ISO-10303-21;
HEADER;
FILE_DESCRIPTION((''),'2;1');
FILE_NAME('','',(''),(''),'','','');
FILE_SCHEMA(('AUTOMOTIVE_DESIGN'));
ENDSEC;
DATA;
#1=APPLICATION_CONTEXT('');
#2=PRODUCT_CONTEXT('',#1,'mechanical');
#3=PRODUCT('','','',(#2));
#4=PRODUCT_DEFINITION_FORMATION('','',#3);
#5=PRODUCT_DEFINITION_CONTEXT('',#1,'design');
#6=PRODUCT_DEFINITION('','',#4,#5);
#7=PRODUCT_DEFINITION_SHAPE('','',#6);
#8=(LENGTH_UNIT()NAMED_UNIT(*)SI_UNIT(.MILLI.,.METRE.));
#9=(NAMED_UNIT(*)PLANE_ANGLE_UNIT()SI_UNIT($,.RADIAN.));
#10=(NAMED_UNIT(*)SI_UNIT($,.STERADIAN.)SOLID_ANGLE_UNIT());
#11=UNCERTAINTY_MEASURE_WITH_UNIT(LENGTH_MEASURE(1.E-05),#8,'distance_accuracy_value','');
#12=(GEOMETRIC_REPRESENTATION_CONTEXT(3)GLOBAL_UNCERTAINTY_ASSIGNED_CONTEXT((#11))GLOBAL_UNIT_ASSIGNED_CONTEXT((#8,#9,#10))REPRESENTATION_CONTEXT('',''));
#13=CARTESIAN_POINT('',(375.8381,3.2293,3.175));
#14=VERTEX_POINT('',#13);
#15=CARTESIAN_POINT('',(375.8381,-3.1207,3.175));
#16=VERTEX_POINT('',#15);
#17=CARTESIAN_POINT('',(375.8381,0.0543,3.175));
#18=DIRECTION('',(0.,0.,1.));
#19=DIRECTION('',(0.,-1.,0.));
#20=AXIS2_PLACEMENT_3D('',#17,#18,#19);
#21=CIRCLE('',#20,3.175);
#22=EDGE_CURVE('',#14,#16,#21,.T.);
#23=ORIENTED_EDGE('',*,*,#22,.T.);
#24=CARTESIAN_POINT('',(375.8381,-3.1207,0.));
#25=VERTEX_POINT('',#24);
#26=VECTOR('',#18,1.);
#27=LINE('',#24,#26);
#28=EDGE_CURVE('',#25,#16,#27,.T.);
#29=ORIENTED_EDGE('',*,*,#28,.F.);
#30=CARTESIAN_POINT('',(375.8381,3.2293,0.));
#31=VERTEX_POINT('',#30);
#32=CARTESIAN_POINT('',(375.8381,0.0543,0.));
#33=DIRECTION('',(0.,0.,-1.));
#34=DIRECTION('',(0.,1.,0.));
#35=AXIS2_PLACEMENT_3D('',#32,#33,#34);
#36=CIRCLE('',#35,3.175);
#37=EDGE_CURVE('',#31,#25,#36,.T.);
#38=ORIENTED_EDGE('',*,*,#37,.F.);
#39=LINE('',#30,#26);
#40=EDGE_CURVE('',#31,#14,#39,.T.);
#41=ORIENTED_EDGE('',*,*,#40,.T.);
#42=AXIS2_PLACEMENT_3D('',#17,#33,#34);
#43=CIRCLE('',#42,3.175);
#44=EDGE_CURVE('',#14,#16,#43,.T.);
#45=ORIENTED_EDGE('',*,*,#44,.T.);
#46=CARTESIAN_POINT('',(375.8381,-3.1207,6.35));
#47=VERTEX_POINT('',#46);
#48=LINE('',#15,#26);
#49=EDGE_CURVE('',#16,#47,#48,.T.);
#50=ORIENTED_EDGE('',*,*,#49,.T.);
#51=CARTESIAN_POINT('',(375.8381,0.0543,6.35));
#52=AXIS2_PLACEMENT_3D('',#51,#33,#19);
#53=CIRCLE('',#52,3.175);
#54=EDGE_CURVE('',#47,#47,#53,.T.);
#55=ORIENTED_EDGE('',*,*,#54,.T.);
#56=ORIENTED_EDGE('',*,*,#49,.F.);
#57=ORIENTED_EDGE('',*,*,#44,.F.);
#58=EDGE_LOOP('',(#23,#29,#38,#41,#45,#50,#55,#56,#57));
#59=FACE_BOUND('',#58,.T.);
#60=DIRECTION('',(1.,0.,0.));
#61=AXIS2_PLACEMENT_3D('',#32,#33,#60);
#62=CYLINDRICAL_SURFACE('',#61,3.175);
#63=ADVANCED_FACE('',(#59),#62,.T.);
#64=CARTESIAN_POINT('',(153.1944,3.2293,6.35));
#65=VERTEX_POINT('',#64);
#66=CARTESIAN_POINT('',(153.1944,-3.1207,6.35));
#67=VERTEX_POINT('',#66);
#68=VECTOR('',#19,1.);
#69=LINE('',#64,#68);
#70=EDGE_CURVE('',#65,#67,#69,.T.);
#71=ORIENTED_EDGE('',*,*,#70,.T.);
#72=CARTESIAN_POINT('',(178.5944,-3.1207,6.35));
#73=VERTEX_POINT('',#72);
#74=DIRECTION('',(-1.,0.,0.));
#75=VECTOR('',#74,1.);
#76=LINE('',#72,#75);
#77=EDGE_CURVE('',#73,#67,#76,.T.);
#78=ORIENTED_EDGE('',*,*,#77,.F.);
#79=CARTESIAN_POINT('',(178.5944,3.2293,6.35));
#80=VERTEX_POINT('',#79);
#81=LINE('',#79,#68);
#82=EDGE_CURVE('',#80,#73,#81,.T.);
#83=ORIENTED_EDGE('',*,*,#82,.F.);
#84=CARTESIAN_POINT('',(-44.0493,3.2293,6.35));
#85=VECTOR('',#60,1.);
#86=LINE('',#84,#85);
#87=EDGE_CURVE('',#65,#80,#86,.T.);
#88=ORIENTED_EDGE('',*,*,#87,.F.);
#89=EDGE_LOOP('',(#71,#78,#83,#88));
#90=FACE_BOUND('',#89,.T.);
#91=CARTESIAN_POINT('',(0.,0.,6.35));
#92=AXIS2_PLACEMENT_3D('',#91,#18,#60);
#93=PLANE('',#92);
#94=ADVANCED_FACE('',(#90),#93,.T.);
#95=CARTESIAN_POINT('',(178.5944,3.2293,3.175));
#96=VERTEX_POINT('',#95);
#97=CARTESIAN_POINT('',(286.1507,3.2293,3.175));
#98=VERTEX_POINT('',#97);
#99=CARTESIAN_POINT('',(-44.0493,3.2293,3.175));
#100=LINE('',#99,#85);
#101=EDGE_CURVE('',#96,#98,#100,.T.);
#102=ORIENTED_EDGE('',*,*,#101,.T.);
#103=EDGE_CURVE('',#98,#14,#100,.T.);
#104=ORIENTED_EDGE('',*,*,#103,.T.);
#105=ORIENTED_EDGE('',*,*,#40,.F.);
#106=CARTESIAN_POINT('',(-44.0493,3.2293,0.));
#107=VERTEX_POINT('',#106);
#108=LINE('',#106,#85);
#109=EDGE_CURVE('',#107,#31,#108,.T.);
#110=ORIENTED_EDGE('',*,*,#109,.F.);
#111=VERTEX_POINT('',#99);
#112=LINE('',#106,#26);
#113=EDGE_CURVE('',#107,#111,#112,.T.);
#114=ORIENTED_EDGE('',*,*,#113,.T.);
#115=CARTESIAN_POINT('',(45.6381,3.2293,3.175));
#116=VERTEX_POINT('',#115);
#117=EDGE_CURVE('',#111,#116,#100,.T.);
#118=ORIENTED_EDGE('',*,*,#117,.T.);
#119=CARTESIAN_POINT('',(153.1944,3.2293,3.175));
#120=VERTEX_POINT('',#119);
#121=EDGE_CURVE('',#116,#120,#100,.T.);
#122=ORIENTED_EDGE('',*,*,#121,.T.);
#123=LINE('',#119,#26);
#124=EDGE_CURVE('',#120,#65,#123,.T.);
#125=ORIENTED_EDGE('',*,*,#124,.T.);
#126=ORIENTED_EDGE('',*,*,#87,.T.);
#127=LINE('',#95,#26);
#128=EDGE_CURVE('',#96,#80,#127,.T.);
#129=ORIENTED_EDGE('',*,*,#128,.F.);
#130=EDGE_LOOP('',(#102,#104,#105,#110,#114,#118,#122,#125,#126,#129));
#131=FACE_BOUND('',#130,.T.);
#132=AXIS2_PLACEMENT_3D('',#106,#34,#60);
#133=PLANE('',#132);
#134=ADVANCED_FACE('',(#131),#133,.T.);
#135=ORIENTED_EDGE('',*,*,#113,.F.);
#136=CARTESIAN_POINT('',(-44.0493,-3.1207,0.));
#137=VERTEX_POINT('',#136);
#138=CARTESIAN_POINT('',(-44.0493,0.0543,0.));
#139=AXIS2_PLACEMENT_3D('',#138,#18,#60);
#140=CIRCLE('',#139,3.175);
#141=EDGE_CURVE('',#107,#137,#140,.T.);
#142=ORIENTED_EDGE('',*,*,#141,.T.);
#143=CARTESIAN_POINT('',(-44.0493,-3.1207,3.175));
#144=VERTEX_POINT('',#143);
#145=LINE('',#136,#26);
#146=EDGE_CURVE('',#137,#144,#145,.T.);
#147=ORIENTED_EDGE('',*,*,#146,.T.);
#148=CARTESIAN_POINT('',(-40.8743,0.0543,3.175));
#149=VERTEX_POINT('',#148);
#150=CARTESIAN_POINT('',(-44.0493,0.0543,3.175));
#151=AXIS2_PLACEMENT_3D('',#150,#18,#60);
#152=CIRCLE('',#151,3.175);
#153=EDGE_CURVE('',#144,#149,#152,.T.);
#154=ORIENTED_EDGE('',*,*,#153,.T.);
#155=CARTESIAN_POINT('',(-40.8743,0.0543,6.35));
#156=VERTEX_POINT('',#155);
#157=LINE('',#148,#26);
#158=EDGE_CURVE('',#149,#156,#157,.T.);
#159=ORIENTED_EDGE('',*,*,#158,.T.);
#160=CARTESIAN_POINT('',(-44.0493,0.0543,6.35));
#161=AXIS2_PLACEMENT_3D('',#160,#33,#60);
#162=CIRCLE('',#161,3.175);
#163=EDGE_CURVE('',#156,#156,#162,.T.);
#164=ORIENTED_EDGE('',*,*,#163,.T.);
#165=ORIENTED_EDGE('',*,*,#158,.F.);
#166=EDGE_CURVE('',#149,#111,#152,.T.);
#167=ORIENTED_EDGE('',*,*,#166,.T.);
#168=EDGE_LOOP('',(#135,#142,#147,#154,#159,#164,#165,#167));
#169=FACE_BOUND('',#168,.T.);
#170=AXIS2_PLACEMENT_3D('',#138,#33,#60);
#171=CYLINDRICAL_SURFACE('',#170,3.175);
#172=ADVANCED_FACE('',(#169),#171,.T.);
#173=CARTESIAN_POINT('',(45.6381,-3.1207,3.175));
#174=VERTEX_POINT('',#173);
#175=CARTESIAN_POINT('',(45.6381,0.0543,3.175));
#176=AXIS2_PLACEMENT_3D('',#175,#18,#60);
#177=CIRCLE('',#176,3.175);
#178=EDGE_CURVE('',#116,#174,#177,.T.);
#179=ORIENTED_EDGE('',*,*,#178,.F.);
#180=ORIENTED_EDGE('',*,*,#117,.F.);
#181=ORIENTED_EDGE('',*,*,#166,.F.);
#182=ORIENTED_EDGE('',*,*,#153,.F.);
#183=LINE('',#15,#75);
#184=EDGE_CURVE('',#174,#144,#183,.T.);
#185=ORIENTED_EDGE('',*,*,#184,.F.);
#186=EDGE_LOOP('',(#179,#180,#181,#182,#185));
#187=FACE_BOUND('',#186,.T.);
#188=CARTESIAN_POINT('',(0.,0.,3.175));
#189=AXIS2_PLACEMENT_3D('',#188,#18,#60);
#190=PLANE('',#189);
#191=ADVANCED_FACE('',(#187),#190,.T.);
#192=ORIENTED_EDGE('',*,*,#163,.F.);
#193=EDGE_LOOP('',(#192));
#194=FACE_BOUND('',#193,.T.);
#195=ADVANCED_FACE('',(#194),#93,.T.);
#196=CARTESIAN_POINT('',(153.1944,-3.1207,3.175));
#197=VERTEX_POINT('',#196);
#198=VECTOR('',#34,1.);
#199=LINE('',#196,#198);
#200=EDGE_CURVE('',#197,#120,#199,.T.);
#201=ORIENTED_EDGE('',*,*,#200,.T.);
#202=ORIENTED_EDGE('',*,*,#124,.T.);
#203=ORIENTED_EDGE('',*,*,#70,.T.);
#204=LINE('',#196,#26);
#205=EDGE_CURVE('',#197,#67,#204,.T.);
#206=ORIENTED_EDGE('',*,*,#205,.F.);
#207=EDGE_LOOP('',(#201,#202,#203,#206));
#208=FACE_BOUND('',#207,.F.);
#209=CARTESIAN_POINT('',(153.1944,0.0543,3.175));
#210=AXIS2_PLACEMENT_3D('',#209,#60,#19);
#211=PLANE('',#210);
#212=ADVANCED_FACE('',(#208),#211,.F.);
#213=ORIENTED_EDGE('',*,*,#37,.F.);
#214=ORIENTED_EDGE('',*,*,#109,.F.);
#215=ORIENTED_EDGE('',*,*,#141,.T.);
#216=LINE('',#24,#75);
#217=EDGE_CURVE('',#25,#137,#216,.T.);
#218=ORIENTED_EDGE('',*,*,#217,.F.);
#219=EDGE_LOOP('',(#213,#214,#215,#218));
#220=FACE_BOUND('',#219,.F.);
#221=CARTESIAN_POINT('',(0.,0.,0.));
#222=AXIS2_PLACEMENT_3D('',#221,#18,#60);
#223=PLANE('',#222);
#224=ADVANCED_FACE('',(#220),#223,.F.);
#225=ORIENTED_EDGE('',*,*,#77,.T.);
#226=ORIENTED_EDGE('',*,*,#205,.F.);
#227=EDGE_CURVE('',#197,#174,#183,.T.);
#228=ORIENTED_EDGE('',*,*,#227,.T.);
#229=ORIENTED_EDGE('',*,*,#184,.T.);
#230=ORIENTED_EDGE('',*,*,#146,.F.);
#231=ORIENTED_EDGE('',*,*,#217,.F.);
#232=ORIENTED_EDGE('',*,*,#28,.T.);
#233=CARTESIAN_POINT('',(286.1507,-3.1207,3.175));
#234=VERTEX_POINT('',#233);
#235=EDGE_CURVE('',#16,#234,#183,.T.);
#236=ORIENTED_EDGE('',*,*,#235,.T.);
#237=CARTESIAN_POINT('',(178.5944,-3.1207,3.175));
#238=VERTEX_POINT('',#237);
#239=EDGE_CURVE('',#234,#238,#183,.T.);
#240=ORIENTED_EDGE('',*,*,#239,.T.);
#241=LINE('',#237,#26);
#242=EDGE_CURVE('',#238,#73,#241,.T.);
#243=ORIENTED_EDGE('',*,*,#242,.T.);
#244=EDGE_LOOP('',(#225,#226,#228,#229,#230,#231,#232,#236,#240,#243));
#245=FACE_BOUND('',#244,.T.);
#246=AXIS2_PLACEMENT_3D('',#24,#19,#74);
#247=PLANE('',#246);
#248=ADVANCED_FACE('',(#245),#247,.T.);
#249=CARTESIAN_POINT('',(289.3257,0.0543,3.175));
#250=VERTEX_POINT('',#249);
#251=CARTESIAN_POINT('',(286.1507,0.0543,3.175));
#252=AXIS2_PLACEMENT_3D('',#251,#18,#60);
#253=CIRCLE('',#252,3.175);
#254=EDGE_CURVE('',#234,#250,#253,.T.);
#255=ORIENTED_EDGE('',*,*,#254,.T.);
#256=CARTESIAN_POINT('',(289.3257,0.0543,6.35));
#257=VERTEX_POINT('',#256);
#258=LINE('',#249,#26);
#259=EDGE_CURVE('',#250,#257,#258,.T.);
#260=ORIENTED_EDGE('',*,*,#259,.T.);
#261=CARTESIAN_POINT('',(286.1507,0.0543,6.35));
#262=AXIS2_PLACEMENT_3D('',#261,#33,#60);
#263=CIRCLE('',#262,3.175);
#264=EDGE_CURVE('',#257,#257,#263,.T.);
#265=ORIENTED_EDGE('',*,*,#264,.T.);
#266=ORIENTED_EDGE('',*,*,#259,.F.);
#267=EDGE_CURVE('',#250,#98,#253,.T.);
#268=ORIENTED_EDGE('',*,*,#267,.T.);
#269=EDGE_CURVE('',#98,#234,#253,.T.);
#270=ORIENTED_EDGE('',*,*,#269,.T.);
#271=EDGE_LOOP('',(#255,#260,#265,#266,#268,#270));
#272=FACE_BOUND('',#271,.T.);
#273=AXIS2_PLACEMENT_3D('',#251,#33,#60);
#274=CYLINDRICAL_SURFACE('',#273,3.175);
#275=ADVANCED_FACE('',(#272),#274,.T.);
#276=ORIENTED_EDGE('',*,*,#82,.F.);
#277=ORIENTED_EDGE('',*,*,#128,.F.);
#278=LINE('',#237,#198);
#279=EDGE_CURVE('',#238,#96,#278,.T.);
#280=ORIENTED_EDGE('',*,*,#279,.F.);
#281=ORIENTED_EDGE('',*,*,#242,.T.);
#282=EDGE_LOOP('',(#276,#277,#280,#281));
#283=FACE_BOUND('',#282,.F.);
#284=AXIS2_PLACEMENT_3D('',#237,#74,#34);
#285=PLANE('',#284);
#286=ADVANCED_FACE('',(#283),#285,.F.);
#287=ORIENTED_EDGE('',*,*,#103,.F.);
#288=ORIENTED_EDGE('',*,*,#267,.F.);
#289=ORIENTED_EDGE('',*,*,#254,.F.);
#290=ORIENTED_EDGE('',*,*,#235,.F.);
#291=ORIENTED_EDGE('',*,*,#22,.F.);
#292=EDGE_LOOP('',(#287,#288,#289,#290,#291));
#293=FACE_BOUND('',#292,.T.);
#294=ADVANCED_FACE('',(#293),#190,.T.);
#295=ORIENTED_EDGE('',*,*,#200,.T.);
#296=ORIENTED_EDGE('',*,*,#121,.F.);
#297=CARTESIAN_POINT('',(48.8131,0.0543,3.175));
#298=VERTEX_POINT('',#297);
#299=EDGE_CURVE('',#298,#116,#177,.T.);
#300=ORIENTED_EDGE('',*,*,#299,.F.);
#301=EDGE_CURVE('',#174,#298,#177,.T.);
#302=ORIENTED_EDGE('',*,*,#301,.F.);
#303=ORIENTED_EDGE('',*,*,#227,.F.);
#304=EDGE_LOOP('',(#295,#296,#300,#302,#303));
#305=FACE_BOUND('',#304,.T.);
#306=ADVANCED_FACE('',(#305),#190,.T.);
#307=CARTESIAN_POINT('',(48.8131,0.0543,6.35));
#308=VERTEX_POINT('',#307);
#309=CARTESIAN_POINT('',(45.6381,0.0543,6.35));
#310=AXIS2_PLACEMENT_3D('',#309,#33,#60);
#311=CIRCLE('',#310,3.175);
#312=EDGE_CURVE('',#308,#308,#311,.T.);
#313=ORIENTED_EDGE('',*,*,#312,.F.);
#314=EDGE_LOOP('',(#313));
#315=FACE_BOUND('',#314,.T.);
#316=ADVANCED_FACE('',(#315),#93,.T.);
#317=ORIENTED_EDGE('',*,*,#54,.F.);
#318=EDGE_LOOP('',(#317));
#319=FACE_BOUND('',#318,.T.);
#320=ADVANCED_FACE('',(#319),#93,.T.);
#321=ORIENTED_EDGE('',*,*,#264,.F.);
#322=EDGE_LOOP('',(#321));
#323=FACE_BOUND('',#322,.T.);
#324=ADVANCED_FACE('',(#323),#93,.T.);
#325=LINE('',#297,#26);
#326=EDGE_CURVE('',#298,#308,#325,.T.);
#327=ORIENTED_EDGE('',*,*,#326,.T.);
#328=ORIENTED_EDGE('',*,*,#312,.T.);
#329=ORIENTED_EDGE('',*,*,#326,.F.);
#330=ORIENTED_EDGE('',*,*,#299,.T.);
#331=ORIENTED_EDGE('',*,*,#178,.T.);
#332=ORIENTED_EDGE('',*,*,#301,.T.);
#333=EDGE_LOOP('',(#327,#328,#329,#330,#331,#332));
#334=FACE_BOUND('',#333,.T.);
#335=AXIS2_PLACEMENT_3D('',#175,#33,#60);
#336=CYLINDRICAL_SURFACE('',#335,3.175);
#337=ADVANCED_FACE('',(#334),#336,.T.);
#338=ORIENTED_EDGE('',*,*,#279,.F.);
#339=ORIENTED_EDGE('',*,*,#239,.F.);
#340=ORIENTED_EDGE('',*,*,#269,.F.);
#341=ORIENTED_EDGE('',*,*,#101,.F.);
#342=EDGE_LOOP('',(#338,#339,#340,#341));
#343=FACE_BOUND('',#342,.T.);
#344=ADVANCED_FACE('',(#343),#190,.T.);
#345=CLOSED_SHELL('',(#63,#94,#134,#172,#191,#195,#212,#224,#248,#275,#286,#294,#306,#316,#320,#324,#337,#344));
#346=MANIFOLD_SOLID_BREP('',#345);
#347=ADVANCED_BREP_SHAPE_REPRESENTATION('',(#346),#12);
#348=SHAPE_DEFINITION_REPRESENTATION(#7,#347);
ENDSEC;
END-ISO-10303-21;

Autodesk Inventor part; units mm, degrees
ref_plane "YZ Plane" through (0, 0, 0) normal (1, 0, 0) x (0, 1, 0)
ref_plane "XZ Plane" through (0, 0, 0) normal (0, 1, 0) x (-1, 0, 0)
ref_plane "XY Plane" through (0, 0, 0) normal (0, 0, 1) x (1, 0, 0)
sketch "Sketch1" plane through (0, 0, 0) normal (0, 0, 1) x (1, 0, 0)
  line L0 (-44.0493, 3.2293) -> (375.8381, 3.2293)
  line L1 (375.8381, 3.2293) -> (375.8381, -3.1207)
  line L2 (375.8381, -3.1207) -> (-44.0493, -3.1207)
  line L3 (-44.0493, -3.1207) -> (-44.0493, 3.2293)
  circle A0 centre (-44.0493, 0.0543) radius 3.175
  circle A1 centre (375.8381, 0.0543) radius 3.175
  point P0 (0, 0)
  dimension "d0" = 419.8874
  dimension "d1" = 6.35
extrude "Extrusion1" add sketch "Sketch1" along normal blind 3.175
sketch "Sketch2" plane through (0, 0, 3.175) normal (0, 0, 1) x (1, 0, 0)
  arc A0 (375.8381, -3.1207) -> (375.8381, 3.2293) centre (375.8381, 0.0543) ccw projected
  line L0 (-44.0493, 3.2293) -> (375.8381, 3.2293) projected
  arc A1 (-44.0493, 3.2293) -> (-44.0493, -3.1207) centre (-44.0493, 0.0543) ccw projected
  line L1 (375.8381, -3.1207) -> (-44.0493, -3.1207) projected
  circle A2 centre (-44.0493, 0.0543) radius 3.175
  circle A3 centre (375.8381, 0.0543) radius 3.175
  line L2 (-44.0493, 0.0543) -> (45.6381, 0.0543)
  circle A4 centre (45.6381, 0.0543) radius 3.175
  line L3 (375.8381, 0.0543) -> (286.1507, 0.0543)
  circle A5 centre (286.1507, 0.0543) radius 3.175
  line L4 (45.6381, 0.0543) -> (286.1507, 0.0543)
  line L5 (45.6381, 3.2293) -> (286.1507, -3.1207)
  line L6 (165.8944, 0.0543) -> (165.8944, -3.1207)
  line L7 (165.8944, -3.1207) -> (153.1944, -3.1207)
  line L8 (153.1944, -3.1207) -> (178.5944, -3.1207)
  line L9 (178.5944, -3.1207) -> (178.5944, 3.2293)
  line L10 (178.5944, 3.2293) -> (153.1944, 3.2293)
  line L11 (153.1944, 3.2293) -> (153.1944, -3.1207)
  point P0 (0, 0)
  dimension "d4" = 89.6874
  dimension "d5" = 89.6874
  dimension "d6" = 12.7
  dimension "d7" = 25.4
extrude "Extrusion2" add sketch "Sketch2" along normal blind 3.175 contours A3 A0 | A5 L4 L3 | L1 L6 L5 L9 | L3 L4 A5 | L5 L4 L9 | L1 L11 L4 L6 | L4 L5 L11 L0 L9 | L4 L11 L5 | A4 L4 L2 | A4 L2 L4 | A1 A2
properties part number "connection2"
